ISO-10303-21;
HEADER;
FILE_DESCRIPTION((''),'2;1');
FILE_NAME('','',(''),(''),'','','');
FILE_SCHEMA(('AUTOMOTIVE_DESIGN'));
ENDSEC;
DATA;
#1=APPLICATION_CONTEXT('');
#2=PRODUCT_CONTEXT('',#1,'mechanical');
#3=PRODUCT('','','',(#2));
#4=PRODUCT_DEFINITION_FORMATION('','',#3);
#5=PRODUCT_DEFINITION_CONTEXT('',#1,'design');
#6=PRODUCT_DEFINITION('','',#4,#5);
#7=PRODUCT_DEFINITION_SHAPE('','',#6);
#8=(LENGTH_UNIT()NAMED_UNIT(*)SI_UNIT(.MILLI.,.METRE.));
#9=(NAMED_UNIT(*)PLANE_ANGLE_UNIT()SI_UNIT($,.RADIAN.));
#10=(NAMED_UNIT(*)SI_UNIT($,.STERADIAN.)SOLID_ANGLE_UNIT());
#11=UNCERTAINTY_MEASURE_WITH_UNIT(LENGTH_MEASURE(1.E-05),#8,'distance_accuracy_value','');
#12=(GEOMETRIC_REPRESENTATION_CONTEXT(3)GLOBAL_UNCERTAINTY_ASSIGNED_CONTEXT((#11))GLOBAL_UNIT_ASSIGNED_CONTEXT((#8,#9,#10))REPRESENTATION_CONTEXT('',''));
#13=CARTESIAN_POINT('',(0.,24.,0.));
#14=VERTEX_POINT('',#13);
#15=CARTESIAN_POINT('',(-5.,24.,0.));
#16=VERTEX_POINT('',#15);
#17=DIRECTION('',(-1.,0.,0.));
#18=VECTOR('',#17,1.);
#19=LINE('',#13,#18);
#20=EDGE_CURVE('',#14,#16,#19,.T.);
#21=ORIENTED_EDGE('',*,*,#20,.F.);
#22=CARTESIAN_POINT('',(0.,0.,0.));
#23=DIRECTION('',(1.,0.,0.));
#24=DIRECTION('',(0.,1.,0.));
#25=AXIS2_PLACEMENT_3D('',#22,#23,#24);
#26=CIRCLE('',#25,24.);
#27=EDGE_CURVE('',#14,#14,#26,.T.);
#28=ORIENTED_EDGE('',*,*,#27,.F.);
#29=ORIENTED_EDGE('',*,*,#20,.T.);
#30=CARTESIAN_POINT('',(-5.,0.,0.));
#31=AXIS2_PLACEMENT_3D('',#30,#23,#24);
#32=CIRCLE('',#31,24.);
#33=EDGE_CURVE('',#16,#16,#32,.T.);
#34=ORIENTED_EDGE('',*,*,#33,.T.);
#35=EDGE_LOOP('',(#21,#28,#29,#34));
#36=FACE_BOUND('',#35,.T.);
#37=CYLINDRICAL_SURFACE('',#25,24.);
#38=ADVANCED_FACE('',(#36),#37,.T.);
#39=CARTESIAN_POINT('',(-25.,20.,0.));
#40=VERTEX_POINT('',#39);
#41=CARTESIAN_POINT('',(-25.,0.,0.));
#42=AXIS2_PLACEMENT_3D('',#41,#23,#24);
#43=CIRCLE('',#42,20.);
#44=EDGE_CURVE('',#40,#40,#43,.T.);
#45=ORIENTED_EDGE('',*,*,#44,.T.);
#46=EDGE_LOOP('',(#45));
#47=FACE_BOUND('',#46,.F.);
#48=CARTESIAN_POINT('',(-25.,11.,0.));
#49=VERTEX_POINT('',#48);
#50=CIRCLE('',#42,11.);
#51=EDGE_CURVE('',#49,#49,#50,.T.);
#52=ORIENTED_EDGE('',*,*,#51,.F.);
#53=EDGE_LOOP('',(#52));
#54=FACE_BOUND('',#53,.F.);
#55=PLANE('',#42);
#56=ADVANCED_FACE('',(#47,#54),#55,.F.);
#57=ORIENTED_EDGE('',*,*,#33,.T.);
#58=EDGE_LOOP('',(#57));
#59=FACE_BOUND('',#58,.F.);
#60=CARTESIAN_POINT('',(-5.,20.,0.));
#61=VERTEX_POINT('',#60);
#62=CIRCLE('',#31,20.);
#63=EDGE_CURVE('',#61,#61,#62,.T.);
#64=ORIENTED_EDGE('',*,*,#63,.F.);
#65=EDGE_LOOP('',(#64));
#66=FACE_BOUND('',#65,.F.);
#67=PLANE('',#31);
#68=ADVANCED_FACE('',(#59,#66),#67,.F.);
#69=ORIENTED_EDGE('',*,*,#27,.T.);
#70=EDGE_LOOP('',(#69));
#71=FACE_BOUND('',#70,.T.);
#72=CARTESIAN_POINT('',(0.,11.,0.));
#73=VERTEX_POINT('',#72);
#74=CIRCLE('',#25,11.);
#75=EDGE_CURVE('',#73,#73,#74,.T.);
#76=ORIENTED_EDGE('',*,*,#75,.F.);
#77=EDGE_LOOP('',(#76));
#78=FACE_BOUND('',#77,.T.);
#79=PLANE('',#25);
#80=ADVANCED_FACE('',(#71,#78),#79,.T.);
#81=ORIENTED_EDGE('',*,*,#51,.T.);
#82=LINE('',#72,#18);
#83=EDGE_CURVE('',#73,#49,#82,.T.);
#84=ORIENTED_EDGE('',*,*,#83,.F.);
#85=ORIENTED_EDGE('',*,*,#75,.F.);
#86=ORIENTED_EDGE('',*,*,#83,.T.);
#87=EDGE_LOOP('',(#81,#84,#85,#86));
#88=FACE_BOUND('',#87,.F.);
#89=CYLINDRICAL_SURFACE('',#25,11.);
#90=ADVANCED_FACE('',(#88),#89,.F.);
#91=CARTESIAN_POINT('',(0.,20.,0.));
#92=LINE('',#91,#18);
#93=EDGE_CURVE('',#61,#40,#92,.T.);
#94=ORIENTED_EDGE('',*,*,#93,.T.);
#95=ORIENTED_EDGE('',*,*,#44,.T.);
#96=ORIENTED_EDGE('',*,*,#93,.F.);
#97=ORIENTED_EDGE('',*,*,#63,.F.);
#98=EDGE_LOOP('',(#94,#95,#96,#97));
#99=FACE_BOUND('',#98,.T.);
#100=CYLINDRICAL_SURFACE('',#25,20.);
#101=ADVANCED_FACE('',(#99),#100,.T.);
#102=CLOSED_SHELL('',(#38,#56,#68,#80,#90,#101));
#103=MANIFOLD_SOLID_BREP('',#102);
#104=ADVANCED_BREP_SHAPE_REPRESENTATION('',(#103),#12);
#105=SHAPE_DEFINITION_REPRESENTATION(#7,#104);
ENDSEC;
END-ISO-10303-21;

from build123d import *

# Parameters (mm, degrees)
F0_R     = 20
F0_R_2   = 11
F1_DEPTH = 25
F0_R_3   = 24
F2_DEPTH = 5


with BuildPart() as f1:
    # F0 (on Right) → F1 (new body)
    with BuildSketch(Plane.YZ):
        Circle(F0_R)
        Circle(F0_R_2, mode=Mode.SUBTRACT)
    extrude(amount=-F1_DEPTH)

    # F0 (on Right) → F2 (join)
    with BuildSketch(Plane.YZ):
        Circle(F0_R_3)
        Circle(F0_R, mode=Mode.SUBTRACT)
    extrude(amount=-F2_DEPTH)


solid = f1.part
